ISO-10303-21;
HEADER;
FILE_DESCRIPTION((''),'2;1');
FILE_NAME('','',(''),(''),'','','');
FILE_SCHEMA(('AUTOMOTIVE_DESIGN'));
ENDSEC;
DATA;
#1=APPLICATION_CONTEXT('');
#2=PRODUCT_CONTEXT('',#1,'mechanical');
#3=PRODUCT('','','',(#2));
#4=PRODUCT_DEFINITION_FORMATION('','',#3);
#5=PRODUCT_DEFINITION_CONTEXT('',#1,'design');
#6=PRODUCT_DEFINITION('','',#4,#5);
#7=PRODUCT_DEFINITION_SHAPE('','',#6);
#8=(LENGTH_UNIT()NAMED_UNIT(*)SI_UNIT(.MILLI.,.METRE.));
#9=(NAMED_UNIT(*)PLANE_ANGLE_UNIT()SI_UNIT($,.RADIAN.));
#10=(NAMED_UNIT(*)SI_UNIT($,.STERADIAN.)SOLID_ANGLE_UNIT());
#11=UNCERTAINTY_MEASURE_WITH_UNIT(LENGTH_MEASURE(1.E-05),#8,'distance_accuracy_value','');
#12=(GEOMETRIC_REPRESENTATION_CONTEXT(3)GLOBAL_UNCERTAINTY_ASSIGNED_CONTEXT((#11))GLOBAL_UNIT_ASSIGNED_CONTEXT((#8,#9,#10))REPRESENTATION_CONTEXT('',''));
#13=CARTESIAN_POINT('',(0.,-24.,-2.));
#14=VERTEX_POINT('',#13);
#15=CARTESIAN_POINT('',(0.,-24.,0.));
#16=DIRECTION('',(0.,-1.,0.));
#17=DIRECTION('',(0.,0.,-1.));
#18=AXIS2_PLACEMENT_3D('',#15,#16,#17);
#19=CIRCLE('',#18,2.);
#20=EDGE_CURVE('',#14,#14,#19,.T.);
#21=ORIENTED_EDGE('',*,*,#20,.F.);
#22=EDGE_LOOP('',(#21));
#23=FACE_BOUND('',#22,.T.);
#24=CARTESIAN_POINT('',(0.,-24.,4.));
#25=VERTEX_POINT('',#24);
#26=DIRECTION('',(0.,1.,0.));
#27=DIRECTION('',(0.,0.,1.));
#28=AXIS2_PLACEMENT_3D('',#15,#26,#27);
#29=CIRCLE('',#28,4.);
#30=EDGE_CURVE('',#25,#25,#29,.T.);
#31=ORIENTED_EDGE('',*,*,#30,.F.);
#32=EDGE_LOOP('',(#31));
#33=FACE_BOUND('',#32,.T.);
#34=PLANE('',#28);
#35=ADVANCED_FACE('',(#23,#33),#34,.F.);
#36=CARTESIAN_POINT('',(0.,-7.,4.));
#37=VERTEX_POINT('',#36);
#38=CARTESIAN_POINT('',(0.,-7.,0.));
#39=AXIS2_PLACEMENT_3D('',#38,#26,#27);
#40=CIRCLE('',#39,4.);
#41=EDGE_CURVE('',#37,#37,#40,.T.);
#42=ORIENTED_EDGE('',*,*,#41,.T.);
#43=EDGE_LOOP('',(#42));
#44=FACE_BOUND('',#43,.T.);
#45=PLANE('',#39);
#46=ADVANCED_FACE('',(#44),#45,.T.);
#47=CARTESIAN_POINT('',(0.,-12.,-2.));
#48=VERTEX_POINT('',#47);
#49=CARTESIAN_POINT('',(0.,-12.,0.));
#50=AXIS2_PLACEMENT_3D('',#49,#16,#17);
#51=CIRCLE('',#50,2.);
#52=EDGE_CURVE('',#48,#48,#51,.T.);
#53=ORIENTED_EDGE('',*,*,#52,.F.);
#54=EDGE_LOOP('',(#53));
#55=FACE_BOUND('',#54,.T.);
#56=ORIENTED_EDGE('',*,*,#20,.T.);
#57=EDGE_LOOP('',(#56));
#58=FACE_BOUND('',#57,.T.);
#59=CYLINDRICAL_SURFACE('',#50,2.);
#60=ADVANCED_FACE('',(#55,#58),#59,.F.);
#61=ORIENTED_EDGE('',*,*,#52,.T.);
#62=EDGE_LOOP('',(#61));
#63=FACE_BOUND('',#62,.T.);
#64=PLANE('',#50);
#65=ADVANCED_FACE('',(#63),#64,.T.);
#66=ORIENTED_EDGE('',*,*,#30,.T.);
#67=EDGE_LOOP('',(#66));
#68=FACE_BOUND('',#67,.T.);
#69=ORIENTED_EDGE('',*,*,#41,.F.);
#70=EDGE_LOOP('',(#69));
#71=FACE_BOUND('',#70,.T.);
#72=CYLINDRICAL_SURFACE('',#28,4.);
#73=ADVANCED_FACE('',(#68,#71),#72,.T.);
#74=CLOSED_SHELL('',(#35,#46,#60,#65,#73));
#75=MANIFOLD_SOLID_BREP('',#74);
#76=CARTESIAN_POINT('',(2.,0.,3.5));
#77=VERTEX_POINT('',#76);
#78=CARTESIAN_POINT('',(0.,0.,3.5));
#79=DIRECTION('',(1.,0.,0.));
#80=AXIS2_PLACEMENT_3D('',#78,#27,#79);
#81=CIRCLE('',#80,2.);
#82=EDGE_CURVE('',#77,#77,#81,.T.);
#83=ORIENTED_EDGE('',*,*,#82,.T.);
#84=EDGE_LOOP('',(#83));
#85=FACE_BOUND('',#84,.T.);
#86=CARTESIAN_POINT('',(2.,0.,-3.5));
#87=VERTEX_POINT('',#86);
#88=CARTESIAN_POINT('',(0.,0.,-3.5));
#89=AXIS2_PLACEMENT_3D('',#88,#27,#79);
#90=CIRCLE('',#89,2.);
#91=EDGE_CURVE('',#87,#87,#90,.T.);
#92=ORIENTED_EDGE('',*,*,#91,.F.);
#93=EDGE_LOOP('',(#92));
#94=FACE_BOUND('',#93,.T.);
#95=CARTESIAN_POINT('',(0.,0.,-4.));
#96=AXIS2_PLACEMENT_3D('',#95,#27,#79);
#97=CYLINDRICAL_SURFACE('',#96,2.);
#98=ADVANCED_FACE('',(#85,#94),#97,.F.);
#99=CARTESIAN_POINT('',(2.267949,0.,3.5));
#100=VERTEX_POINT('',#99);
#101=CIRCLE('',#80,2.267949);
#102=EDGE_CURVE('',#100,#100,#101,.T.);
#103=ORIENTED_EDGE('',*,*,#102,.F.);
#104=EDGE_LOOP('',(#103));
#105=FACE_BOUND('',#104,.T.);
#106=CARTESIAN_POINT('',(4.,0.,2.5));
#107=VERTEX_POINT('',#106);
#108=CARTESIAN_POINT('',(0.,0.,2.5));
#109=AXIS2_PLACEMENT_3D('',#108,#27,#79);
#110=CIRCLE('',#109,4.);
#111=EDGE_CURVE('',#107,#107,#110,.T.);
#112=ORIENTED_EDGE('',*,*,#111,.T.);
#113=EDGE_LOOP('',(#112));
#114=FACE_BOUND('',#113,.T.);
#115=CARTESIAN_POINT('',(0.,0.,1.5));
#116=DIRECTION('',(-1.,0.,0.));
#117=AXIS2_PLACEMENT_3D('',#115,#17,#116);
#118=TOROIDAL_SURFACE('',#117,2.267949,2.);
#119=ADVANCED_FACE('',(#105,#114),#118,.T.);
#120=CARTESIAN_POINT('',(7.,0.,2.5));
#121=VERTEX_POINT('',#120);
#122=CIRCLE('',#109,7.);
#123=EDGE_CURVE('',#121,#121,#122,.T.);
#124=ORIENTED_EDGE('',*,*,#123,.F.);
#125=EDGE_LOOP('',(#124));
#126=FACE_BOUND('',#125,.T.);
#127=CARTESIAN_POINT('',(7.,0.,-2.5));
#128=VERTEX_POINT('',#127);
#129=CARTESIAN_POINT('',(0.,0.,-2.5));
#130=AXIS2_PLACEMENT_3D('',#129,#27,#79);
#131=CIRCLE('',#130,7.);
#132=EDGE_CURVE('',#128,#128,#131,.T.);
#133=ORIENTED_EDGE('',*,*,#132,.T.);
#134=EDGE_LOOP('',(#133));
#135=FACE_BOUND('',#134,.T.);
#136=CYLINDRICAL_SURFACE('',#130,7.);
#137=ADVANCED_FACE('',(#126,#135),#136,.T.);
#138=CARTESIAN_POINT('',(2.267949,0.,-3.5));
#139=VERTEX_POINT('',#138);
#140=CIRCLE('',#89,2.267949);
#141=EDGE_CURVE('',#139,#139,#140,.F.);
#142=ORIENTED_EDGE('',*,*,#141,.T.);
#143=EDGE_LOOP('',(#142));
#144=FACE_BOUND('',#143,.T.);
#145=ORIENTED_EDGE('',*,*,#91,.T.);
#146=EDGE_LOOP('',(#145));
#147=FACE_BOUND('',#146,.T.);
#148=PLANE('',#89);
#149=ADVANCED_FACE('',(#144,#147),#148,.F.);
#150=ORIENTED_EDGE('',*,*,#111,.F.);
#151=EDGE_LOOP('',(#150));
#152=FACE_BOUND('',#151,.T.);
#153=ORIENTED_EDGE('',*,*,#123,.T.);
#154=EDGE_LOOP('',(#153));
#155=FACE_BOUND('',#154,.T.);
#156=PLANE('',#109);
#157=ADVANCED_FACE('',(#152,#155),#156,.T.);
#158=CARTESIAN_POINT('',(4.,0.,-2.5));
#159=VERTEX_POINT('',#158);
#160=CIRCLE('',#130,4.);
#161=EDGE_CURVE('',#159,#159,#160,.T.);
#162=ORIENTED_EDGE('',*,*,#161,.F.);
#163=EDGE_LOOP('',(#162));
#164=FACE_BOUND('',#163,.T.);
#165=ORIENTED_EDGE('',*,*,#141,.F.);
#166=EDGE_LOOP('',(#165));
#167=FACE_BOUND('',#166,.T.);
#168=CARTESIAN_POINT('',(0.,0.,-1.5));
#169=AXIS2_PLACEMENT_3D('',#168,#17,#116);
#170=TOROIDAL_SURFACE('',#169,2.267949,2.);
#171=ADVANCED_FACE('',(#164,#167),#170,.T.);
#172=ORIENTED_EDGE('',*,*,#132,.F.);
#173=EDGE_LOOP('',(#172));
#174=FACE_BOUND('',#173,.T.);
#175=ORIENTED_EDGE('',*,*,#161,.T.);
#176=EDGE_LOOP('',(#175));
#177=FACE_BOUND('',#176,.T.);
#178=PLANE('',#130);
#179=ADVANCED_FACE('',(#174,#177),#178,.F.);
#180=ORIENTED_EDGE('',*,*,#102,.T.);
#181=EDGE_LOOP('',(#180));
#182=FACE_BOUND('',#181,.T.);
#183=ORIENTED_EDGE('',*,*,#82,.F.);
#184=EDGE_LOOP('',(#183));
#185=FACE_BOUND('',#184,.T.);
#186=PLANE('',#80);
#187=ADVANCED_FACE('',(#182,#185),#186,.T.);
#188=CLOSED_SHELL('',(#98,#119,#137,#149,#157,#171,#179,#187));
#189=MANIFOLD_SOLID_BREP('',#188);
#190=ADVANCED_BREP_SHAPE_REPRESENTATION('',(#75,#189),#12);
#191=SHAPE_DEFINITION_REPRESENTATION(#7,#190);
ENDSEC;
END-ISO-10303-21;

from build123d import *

# Parameters (mm, degrees)
EXTRUDE_1_DEPTH      = 2.5
EXTRUDE_1_DEPTH_BACK = 2.5
SKETCH_1_R           = 7
SKETCH_4_R           = 4
EXTRUDE_2_DEPTH      = 17
SKETCH_5_R           = 2
CUT_EXTRUDE_1_DEPTH  = 12
EXTRUDE_3_DEPTH      = 3.5
EXTRUDE_3_DEPTH_BACK = 3.5
SKETCH_7_R           = 4
SKETCH_8_R           = 2
CUT_EXTRUDE_2_DEPTH  = 27.100766272
FILLET_2_R           = 2


with BuildPart() as part:
    # Эскиз1 → Бобышка-Вытянуть1 (new, two sides: drawn at the far end of the back side and taken through both)
    with BuildSketch(Plane.XY.offset(-EXTRUDE_1_DEPTH_BACK)):
        Circle(SKETCH_1_R)
    extrude(amount=EXTRUDE_1_DEPTH + EXTRUDE_1_DEPTH_BACK)

    # Эскиз7 → Бобышка-Вытянуть3 (add, two sides: drawn at the far end of the back side and taken through both)
    with BuildSketch(Plane.XY.offset(-EXTRUDE_3_DEPTH_BACK)):
        Circle(SKETCH_7_R)
    extrude(amount=EXTRUDE_3_DEPTH + EXTRUDE_3_DEPTH_BACK)

    # Эскиз8 → Вырез-Вытянуть2 (cut, through all)
    with BuildSketch(Plane.XY.offset(3.5)):
        Circle(SKETCH_8_R)
    extrude(amount=-CUT_EXTRUDE_2_DEPTH, mode=Mode.SUBTRACT)

    # Скругление2
    # the kernel refuses this fillet: 2 mm, written as the material it takes off along each edge
    with BuildSketch(Plane(origin=(0, 0, -3.5), x_dir=(1, 0, 0), z_dir=(0, -1, 0))) as fillet_2_piece_1:
        with BuildLine():
            CenterArc((2.267949192, 2), FILLET_2_R, 270, 60)
            Line((2.267949192, 0), (2.267949192, -0.04))
            Line((2.267949192, -0.04), (4, -0.04))
            Line((4, -0.04), (4.04, 0))
            ThreePointArc((4.04, 0), (4.04, 0.5), (4.034641016, 0.98))
            Line((4.034641016, 0.98), (4, 1))
        make_face()
    revolve(axis=Axis((0, 0, -3.5), (0, 0, 1)), mode=Mode.SUBTRACT)
    with BuildSketch(Plane(origin=(0, 0, 3.5), x_dir=(1, 0, 0), z_dir=(0, -1, 0))) as fillet_2_piece_2:
        with BuildLine():
            CenterArc((2.267949192, -2), FILLET_2_R, 30, 60)
            Line((2.267949192, 0), (2.267949192, 0.04))
            Line((2.267949192, 0.04), (4, 0.04))
            Line((4, 0.04), (4.04, 0))
            ThreePointArc((4.04, 0), (4.04, -0.5), (4.034641016, -0.98))
            Line((4.034641016, -0.98), (4, -1))
        make_face()
    revolve(axis=Axis((0, 0, 3.5), (0, 0, 1)), mode=Mode.SUBTRACT)


with BuildPart() as body_2:
    # Эскиз4 → Бобышка-Вытянуть2 (new body)
    with BuildSketch(Plane(origin=(0, -7, 0), x_dir=(1, 0, 0), z_dir=(0, 1, 0))):
        with Locations(Location((0, 0, 0), (0, 0, 270))):
            Circle(SKETCH_4_R)
    extrude(amount=-EXTRUDE_2_DEPTH)

    # Эскиз5 → Вырез-Вытянуть1 (cut)
    with BuildSketch(Plane.XZ.offset(24)):
        with Locations(Location((0, 0, 0), (0, 0, 270))):
            Circle(SKETCH_5_R)
    extrude(amount=-CUT_EXTRUDE_1_DEPTH, mode=Mode.SUBTRACT)


solid = Compound([part.part, body_2.part])
